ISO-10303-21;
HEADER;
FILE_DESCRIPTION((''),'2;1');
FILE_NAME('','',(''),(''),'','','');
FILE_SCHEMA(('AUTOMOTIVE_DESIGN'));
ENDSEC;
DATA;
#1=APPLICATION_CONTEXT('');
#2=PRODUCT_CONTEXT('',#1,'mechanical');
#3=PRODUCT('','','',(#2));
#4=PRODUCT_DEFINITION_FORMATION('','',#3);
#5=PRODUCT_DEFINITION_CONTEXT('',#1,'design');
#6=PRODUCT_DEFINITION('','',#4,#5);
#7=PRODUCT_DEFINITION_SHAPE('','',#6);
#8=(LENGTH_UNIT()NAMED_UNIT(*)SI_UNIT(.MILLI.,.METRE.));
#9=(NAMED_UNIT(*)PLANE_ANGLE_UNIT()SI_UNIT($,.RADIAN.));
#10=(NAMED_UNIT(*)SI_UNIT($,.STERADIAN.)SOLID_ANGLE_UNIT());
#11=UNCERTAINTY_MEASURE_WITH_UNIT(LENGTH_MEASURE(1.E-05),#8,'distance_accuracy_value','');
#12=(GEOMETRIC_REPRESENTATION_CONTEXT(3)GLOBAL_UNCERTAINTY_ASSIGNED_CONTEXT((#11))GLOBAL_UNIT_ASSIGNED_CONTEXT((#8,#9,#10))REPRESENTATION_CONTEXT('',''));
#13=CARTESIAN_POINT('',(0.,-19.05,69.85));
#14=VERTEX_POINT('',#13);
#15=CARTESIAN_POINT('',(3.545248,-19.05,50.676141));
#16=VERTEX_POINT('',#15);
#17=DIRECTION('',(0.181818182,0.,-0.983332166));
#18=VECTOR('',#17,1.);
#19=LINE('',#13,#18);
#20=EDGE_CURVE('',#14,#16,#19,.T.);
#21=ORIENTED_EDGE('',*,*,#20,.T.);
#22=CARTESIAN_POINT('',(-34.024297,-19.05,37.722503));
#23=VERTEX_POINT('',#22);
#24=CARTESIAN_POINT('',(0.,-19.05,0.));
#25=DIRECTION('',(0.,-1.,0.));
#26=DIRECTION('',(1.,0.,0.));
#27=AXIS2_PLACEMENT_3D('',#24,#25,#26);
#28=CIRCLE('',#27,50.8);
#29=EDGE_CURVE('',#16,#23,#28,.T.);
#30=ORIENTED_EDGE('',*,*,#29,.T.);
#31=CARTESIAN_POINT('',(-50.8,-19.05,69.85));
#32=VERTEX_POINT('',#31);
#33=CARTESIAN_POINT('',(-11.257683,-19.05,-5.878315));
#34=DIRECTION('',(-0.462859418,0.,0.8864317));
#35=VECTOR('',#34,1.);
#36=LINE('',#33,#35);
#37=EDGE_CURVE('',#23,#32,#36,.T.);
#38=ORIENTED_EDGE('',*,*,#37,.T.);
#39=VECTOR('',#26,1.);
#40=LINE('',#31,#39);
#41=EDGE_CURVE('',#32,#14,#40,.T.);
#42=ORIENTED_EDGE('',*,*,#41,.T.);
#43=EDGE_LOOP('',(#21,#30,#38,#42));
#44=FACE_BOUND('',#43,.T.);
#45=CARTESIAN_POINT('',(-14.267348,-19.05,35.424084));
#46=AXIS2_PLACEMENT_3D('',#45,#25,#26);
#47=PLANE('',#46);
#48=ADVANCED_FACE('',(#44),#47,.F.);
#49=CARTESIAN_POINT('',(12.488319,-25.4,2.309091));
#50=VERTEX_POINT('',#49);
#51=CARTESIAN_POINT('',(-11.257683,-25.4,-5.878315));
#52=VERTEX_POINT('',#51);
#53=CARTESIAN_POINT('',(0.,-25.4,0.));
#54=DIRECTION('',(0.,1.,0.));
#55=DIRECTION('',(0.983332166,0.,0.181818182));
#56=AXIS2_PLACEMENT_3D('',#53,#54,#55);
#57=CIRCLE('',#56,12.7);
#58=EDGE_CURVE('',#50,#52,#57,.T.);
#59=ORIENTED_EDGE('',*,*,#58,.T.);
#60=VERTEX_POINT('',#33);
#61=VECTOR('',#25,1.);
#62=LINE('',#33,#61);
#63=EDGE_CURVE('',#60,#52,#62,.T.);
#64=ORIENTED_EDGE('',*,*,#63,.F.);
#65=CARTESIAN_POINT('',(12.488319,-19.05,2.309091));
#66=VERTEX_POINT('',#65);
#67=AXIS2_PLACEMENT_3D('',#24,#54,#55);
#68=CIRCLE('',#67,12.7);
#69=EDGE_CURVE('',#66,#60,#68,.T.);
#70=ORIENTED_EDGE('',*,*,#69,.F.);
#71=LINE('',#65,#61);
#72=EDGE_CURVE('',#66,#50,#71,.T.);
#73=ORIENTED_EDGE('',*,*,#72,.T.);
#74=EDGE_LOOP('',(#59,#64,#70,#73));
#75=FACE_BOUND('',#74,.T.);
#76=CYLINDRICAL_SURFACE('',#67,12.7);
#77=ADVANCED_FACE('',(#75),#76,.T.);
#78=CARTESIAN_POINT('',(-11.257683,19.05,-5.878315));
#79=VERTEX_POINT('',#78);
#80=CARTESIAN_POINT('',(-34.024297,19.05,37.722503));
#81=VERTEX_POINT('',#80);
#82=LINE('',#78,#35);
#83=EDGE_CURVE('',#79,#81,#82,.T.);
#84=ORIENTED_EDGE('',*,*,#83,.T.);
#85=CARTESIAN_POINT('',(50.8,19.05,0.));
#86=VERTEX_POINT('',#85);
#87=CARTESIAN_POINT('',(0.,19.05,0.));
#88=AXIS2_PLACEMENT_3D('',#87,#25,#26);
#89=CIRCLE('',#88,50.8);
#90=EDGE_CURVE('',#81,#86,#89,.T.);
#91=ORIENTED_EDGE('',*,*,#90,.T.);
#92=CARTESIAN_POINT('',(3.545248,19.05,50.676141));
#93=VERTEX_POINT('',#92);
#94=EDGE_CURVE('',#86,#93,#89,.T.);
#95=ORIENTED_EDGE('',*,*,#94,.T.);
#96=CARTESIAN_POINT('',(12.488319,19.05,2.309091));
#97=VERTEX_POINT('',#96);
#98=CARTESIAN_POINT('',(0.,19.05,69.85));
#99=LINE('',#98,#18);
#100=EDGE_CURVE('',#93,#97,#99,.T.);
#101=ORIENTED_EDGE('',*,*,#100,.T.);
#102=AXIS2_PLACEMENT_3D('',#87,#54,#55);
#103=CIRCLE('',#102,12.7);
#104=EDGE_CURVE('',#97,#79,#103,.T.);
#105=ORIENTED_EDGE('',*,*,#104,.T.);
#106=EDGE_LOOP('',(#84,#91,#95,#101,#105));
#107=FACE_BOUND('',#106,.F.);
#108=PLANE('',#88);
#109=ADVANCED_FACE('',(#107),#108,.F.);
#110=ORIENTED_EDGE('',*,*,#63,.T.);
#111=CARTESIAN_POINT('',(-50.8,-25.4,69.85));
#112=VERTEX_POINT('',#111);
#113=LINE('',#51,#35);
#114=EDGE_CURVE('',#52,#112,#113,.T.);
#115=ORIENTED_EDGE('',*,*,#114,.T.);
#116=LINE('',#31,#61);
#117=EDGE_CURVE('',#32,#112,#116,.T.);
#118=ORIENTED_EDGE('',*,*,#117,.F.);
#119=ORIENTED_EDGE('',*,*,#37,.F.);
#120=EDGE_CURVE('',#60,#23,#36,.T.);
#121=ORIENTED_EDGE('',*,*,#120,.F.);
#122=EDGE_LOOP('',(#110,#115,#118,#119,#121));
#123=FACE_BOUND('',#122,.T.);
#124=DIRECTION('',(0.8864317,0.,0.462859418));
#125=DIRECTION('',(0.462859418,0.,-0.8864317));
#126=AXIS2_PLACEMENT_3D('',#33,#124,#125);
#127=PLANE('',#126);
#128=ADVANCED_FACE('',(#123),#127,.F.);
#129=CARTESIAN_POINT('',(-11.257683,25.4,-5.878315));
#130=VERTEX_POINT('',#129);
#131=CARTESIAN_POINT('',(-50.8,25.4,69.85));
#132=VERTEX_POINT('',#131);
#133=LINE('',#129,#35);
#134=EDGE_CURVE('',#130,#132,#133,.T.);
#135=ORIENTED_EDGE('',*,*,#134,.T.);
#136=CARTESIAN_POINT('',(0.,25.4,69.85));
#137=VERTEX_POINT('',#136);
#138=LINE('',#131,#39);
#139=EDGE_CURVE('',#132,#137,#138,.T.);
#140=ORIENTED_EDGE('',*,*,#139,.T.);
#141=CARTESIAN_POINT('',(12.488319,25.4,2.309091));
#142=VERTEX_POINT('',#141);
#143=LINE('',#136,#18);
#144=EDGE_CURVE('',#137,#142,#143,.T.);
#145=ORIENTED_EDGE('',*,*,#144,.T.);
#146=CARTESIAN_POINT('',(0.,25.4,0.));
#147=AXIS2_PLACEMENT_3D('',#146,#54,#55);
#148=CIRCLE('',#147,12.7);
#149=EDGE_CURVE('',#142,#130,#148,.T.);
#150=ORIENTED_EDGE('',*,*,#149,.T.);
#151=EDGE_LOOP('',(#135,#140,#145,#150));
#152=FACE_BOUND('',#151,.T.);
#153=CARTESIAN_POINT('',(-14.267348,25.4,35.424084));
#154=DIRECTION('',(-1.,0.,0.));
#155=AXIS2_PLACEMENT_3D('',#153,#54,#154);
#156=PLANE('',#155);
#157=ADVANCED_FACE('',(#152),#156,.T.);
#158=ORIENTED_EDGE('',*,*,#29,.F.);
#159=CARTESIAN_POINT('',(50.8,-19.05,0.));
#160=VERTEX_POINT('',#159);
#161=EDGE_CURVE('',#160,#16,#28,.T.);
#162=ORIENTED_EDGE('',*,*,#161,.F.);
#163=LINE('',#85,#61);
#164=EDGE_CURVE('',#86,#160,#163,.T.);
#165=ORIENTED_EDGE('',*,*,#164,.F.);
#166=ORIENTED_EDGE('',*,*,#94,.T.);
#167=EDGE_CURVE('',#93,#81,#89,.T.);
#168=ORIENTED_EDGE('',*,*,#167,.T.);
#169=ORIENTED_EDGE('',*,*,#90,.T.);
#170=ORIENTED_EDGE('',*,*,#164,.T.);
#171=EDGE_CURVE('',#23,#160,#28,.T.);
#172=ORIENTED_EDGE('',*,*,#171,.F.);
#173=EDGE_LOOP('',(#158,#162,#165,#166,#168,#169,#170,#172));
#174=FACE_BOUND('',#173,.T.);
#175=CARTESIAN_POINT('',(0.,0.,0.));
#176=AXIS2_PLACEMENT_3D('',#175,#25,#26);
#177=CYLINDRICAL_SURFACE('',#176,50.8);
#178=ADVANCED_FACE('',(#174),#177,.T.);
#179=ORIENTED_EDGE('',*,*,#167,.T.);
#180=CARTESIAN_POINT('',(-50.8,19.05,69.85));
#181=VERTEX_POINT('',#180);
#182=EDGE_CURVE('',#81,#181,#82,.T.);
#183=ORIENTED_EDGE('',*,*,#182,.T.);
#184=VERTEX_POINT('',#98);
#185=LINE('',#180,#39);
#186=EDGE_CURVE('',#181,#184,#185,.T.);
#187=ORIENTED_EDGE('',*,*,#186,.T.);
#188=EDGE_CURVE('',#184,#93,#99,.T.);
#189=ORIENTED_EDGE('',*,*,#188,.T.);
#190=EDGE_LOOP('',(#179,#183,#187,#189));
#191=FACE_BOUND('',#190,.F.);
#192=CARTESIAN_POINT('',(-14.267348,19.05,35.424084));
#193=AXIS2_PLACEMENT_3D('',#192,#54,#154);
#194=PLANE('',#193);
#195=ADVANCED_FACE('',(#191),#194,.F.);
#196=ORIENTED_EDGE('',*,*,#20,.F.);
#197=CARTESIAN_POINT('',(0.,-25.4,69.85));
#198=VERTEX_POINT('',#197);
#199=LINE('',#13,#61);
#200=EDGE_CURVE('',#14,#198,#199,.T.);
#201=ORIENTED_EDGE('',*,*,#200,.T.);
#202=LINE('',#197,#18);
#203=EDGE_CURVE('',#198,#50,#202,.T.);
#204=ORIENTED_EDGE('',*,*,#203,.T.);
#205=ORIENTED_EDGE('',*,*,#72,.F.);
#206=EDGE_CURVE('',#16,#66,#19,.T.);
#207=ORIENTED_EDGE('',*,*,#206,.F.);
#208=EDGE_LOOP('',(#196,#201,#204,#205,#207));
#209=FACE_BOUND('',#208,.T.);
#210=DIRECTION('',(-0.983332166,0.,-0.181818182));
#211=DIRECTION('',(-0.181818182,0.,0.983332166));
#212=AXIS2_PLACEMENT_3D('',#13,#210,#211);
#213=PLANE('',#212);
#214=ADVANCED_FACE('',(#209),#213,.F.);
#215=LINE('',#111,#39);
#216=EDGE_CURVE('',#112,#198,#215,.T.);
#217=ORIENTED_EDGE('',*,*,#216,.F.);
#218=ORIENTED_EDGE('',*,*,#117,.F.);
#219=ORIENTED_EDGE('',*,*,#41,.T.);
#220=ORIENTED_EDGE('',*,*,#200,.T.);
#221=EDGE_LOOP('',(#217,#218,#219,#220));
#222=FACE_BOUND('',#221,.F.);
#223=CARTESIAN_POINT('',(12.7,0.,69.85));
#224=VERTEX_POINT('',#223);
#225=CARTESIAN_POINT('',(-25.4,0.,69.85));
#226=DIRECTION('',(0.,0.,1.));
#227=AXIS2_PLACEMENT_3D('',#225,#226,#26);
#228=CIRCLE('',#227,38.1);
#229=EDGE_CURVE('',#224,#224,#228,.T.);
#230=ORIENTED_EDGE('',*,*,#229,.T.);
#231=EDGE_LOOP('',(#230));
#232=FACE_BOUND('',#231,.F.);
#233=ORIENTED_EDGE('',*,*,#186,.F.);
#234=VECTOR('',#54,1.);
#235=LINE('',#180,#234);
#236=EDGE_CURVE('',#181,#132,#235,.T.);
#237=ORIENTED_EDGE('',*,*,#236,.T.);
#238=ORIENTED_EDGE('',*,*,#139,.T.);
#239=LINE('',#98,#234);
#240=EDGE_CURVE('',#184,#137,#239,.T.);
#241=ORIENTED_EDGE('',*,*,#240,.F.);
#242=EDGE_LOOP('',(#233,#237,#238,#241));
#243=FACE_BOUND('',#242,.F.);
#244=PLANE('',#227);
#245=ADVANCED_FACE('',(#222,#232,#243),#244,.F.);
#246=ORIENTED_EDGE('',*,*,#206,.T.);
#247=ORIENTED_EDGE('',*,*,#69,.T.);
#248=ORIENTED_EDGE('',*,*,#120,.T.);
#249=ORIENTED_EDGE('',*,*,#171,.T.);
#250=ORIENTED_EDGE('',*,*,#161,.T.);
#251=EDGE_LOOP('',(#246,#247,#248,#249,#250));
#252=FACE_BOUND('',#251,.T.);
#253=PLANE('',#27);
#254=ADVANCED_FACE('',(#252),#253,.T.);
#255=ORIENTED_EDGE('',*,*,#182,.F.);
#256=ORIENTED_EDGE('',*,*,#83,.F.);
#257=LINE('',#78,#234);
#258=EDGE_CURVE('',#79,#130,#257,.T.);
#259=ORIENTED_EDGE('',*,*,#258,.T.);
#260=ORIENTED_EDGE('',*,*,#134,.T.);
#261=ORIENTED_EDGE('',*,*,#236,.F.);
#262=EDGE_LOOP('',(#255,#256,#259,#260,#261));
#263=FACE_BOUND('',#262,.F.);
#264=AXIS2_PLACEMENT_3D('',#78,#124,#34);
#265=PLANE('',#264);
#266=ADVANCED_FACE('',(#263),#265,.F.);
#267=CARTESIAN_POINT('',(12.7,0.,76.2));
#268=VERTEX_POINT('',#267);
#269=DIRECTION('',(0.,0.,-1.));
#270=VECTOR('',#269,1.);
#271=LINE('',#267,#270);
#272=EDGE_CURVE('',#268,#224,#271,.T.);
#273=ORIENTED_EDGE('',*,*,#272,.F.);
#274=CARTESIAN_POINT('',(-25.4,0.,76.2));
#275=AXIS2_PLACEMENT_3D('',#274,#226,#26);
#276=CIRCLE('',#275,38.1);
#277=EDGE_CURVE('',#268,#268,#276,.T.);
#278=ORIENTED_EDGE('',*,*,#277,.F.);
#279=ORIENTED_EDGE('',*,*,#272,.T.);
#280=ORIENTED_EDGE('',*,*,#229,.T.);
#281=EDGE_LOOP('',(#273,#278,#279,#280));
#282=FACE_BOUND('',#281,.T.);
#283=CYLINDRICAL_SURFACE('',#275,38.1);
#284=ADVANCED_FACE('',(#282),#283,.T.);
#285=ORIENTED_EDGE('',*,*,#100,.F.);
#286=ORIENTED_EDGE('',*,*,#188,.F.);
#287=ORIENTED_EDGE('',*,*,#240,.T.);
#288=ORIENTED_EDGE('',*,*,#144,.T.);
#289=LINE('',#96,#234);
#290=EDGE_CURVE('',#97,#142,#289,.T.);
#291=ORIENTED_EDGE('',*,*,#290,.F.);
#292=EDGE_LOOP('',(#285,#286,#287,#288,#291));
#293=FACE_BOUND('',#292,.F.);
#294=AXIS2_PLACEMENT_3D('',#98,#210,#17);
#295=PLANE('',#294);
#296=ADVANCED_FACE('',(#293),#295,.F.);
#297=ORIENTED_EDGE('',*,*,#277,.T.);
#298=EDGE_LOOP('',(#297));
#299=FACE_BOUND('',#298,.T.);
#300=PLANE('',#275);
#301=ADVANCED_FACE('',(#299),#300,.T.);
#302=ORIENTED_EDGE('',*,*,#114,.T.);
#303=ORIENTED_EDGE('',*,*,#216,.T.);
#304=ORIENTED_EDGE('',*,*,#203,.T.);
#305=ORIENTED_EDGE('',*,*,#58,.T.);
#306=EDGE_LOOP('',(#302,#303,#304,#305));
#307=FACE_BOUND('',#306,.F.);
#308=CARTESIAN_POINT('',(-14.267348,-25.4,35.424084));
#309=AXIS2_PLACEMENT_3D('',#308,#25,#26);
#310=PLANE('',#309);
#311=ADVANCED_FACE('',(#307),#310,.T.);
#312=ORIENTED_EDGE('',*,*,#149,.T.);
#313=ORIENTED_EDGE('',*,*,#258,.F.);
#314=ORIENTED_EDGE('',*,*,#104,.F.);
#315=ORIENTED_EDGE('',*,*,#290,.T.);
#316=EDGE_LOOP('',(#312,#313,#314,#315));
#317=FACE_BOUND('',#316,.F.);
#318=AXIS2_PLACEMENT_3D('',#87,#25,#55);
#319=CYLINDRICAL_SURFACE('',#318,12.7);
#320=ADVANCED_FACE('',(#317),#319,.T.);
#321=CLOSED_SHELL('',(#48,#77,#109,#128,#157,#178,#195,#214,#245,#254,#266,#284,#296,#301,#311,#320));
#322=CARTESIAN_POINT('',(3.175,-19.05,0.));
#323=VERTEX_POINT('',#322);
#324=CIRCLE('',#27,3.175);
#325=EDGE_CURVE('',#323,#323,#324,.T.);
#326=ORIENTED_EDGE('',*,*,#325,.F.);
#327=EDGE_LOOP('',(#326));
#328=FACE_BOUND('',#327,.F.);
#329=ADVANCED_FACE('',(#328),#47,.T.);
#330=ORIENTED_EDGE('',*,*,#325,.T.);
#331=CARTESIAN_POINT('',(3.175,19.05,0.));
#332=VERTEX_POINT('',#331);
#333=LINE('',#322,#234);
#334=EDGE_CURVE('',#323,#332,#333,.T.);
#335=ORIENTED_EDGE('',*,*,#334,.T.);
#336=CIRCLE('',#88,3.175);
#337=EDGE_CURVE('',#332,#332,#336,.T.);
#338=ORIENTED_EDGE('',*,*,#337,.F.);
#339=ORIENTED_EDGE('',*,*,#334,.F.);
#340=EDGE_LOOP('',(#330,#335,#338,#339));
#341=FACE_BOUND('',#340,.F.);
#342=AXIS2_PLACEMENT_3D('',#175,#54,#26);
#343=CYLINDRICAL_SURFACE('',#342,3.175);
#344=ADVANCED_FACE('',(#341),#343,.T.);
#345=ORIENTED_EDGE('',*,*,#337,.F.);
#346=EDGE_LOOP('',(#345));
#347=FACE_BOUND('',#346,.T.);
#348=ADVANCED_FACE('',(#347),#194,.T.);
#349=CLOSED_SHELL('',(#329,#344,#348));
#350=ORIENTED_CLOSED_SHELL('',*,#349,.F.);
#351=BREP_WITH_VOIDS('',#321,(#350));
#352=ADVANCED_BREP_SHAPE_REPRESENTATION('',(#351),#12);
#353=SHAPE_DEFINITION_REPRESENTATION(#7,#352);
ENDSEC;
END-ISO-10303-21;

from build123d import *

# Parameters (mm, degrees)
F0_R     = 50.8
F0_R_2   = 3.175
F1_DEPTH = 19.05
F3_R     = 38.1
F4_DEPTH = 6.35
F6_DEPTH = 6.35


# Not quite as in the source:
# - a pattern or mirror of a feature is missing from the dataset's text; its kind, count and spacing are read off the source's solid


with BuildPart() as f1:
    # F0 (on Front) → F1 (new body, symmetric)
    with BuildSketch(Plane.XZ):
        Circle(F0_R)
        Circle(F0_R_2, mode=Mode.SUBTRACT)
    extrude(amount=F1_DEPTH, both=True)



with BuildPart() as f4:
    # F3 (on offset) → F4 (new body)
    with BuildSketch(Plane.XY.offset(76.2)):
        with Locations((-25.4, 0)):
            Circle(F3_R)
    extrude(amount=-F4_DEPTH)


with BuildPart() as f1_1:
    add(f1.part)

    add(f4.part)  # F6 merges F4
    # F5 (on face) → F6 (join)
    with BuildSketch(Plane(origin=(0, 19.05, 0), x_dir=(-1, 0, 0), z_dir=(0, 1, 0))):
        with BuildLine():
            Line((0, 69.85), (-12.4883185087, 2.3090909091))
            ThreePointArc((-12.4883185087, 2.3090909091), (-4.1396882106, -12.0063725379), (11.2576825912, -5.8783146118))
            Line((11.2576825912, -5.8783146118), (50.8, 69.85))
            Line((50.8, 69.85), (0, 69.85))
        make_face()
    f6 = extrude(amount=F6_DEPTH)

    # F6_copies: F6 across plane
    add(f6.mirror(Plane(origin=(0, 0, 0), x_dir=(0, 0, -1), z_dir=(0, -1, 0))))


solid = f1_1.part
